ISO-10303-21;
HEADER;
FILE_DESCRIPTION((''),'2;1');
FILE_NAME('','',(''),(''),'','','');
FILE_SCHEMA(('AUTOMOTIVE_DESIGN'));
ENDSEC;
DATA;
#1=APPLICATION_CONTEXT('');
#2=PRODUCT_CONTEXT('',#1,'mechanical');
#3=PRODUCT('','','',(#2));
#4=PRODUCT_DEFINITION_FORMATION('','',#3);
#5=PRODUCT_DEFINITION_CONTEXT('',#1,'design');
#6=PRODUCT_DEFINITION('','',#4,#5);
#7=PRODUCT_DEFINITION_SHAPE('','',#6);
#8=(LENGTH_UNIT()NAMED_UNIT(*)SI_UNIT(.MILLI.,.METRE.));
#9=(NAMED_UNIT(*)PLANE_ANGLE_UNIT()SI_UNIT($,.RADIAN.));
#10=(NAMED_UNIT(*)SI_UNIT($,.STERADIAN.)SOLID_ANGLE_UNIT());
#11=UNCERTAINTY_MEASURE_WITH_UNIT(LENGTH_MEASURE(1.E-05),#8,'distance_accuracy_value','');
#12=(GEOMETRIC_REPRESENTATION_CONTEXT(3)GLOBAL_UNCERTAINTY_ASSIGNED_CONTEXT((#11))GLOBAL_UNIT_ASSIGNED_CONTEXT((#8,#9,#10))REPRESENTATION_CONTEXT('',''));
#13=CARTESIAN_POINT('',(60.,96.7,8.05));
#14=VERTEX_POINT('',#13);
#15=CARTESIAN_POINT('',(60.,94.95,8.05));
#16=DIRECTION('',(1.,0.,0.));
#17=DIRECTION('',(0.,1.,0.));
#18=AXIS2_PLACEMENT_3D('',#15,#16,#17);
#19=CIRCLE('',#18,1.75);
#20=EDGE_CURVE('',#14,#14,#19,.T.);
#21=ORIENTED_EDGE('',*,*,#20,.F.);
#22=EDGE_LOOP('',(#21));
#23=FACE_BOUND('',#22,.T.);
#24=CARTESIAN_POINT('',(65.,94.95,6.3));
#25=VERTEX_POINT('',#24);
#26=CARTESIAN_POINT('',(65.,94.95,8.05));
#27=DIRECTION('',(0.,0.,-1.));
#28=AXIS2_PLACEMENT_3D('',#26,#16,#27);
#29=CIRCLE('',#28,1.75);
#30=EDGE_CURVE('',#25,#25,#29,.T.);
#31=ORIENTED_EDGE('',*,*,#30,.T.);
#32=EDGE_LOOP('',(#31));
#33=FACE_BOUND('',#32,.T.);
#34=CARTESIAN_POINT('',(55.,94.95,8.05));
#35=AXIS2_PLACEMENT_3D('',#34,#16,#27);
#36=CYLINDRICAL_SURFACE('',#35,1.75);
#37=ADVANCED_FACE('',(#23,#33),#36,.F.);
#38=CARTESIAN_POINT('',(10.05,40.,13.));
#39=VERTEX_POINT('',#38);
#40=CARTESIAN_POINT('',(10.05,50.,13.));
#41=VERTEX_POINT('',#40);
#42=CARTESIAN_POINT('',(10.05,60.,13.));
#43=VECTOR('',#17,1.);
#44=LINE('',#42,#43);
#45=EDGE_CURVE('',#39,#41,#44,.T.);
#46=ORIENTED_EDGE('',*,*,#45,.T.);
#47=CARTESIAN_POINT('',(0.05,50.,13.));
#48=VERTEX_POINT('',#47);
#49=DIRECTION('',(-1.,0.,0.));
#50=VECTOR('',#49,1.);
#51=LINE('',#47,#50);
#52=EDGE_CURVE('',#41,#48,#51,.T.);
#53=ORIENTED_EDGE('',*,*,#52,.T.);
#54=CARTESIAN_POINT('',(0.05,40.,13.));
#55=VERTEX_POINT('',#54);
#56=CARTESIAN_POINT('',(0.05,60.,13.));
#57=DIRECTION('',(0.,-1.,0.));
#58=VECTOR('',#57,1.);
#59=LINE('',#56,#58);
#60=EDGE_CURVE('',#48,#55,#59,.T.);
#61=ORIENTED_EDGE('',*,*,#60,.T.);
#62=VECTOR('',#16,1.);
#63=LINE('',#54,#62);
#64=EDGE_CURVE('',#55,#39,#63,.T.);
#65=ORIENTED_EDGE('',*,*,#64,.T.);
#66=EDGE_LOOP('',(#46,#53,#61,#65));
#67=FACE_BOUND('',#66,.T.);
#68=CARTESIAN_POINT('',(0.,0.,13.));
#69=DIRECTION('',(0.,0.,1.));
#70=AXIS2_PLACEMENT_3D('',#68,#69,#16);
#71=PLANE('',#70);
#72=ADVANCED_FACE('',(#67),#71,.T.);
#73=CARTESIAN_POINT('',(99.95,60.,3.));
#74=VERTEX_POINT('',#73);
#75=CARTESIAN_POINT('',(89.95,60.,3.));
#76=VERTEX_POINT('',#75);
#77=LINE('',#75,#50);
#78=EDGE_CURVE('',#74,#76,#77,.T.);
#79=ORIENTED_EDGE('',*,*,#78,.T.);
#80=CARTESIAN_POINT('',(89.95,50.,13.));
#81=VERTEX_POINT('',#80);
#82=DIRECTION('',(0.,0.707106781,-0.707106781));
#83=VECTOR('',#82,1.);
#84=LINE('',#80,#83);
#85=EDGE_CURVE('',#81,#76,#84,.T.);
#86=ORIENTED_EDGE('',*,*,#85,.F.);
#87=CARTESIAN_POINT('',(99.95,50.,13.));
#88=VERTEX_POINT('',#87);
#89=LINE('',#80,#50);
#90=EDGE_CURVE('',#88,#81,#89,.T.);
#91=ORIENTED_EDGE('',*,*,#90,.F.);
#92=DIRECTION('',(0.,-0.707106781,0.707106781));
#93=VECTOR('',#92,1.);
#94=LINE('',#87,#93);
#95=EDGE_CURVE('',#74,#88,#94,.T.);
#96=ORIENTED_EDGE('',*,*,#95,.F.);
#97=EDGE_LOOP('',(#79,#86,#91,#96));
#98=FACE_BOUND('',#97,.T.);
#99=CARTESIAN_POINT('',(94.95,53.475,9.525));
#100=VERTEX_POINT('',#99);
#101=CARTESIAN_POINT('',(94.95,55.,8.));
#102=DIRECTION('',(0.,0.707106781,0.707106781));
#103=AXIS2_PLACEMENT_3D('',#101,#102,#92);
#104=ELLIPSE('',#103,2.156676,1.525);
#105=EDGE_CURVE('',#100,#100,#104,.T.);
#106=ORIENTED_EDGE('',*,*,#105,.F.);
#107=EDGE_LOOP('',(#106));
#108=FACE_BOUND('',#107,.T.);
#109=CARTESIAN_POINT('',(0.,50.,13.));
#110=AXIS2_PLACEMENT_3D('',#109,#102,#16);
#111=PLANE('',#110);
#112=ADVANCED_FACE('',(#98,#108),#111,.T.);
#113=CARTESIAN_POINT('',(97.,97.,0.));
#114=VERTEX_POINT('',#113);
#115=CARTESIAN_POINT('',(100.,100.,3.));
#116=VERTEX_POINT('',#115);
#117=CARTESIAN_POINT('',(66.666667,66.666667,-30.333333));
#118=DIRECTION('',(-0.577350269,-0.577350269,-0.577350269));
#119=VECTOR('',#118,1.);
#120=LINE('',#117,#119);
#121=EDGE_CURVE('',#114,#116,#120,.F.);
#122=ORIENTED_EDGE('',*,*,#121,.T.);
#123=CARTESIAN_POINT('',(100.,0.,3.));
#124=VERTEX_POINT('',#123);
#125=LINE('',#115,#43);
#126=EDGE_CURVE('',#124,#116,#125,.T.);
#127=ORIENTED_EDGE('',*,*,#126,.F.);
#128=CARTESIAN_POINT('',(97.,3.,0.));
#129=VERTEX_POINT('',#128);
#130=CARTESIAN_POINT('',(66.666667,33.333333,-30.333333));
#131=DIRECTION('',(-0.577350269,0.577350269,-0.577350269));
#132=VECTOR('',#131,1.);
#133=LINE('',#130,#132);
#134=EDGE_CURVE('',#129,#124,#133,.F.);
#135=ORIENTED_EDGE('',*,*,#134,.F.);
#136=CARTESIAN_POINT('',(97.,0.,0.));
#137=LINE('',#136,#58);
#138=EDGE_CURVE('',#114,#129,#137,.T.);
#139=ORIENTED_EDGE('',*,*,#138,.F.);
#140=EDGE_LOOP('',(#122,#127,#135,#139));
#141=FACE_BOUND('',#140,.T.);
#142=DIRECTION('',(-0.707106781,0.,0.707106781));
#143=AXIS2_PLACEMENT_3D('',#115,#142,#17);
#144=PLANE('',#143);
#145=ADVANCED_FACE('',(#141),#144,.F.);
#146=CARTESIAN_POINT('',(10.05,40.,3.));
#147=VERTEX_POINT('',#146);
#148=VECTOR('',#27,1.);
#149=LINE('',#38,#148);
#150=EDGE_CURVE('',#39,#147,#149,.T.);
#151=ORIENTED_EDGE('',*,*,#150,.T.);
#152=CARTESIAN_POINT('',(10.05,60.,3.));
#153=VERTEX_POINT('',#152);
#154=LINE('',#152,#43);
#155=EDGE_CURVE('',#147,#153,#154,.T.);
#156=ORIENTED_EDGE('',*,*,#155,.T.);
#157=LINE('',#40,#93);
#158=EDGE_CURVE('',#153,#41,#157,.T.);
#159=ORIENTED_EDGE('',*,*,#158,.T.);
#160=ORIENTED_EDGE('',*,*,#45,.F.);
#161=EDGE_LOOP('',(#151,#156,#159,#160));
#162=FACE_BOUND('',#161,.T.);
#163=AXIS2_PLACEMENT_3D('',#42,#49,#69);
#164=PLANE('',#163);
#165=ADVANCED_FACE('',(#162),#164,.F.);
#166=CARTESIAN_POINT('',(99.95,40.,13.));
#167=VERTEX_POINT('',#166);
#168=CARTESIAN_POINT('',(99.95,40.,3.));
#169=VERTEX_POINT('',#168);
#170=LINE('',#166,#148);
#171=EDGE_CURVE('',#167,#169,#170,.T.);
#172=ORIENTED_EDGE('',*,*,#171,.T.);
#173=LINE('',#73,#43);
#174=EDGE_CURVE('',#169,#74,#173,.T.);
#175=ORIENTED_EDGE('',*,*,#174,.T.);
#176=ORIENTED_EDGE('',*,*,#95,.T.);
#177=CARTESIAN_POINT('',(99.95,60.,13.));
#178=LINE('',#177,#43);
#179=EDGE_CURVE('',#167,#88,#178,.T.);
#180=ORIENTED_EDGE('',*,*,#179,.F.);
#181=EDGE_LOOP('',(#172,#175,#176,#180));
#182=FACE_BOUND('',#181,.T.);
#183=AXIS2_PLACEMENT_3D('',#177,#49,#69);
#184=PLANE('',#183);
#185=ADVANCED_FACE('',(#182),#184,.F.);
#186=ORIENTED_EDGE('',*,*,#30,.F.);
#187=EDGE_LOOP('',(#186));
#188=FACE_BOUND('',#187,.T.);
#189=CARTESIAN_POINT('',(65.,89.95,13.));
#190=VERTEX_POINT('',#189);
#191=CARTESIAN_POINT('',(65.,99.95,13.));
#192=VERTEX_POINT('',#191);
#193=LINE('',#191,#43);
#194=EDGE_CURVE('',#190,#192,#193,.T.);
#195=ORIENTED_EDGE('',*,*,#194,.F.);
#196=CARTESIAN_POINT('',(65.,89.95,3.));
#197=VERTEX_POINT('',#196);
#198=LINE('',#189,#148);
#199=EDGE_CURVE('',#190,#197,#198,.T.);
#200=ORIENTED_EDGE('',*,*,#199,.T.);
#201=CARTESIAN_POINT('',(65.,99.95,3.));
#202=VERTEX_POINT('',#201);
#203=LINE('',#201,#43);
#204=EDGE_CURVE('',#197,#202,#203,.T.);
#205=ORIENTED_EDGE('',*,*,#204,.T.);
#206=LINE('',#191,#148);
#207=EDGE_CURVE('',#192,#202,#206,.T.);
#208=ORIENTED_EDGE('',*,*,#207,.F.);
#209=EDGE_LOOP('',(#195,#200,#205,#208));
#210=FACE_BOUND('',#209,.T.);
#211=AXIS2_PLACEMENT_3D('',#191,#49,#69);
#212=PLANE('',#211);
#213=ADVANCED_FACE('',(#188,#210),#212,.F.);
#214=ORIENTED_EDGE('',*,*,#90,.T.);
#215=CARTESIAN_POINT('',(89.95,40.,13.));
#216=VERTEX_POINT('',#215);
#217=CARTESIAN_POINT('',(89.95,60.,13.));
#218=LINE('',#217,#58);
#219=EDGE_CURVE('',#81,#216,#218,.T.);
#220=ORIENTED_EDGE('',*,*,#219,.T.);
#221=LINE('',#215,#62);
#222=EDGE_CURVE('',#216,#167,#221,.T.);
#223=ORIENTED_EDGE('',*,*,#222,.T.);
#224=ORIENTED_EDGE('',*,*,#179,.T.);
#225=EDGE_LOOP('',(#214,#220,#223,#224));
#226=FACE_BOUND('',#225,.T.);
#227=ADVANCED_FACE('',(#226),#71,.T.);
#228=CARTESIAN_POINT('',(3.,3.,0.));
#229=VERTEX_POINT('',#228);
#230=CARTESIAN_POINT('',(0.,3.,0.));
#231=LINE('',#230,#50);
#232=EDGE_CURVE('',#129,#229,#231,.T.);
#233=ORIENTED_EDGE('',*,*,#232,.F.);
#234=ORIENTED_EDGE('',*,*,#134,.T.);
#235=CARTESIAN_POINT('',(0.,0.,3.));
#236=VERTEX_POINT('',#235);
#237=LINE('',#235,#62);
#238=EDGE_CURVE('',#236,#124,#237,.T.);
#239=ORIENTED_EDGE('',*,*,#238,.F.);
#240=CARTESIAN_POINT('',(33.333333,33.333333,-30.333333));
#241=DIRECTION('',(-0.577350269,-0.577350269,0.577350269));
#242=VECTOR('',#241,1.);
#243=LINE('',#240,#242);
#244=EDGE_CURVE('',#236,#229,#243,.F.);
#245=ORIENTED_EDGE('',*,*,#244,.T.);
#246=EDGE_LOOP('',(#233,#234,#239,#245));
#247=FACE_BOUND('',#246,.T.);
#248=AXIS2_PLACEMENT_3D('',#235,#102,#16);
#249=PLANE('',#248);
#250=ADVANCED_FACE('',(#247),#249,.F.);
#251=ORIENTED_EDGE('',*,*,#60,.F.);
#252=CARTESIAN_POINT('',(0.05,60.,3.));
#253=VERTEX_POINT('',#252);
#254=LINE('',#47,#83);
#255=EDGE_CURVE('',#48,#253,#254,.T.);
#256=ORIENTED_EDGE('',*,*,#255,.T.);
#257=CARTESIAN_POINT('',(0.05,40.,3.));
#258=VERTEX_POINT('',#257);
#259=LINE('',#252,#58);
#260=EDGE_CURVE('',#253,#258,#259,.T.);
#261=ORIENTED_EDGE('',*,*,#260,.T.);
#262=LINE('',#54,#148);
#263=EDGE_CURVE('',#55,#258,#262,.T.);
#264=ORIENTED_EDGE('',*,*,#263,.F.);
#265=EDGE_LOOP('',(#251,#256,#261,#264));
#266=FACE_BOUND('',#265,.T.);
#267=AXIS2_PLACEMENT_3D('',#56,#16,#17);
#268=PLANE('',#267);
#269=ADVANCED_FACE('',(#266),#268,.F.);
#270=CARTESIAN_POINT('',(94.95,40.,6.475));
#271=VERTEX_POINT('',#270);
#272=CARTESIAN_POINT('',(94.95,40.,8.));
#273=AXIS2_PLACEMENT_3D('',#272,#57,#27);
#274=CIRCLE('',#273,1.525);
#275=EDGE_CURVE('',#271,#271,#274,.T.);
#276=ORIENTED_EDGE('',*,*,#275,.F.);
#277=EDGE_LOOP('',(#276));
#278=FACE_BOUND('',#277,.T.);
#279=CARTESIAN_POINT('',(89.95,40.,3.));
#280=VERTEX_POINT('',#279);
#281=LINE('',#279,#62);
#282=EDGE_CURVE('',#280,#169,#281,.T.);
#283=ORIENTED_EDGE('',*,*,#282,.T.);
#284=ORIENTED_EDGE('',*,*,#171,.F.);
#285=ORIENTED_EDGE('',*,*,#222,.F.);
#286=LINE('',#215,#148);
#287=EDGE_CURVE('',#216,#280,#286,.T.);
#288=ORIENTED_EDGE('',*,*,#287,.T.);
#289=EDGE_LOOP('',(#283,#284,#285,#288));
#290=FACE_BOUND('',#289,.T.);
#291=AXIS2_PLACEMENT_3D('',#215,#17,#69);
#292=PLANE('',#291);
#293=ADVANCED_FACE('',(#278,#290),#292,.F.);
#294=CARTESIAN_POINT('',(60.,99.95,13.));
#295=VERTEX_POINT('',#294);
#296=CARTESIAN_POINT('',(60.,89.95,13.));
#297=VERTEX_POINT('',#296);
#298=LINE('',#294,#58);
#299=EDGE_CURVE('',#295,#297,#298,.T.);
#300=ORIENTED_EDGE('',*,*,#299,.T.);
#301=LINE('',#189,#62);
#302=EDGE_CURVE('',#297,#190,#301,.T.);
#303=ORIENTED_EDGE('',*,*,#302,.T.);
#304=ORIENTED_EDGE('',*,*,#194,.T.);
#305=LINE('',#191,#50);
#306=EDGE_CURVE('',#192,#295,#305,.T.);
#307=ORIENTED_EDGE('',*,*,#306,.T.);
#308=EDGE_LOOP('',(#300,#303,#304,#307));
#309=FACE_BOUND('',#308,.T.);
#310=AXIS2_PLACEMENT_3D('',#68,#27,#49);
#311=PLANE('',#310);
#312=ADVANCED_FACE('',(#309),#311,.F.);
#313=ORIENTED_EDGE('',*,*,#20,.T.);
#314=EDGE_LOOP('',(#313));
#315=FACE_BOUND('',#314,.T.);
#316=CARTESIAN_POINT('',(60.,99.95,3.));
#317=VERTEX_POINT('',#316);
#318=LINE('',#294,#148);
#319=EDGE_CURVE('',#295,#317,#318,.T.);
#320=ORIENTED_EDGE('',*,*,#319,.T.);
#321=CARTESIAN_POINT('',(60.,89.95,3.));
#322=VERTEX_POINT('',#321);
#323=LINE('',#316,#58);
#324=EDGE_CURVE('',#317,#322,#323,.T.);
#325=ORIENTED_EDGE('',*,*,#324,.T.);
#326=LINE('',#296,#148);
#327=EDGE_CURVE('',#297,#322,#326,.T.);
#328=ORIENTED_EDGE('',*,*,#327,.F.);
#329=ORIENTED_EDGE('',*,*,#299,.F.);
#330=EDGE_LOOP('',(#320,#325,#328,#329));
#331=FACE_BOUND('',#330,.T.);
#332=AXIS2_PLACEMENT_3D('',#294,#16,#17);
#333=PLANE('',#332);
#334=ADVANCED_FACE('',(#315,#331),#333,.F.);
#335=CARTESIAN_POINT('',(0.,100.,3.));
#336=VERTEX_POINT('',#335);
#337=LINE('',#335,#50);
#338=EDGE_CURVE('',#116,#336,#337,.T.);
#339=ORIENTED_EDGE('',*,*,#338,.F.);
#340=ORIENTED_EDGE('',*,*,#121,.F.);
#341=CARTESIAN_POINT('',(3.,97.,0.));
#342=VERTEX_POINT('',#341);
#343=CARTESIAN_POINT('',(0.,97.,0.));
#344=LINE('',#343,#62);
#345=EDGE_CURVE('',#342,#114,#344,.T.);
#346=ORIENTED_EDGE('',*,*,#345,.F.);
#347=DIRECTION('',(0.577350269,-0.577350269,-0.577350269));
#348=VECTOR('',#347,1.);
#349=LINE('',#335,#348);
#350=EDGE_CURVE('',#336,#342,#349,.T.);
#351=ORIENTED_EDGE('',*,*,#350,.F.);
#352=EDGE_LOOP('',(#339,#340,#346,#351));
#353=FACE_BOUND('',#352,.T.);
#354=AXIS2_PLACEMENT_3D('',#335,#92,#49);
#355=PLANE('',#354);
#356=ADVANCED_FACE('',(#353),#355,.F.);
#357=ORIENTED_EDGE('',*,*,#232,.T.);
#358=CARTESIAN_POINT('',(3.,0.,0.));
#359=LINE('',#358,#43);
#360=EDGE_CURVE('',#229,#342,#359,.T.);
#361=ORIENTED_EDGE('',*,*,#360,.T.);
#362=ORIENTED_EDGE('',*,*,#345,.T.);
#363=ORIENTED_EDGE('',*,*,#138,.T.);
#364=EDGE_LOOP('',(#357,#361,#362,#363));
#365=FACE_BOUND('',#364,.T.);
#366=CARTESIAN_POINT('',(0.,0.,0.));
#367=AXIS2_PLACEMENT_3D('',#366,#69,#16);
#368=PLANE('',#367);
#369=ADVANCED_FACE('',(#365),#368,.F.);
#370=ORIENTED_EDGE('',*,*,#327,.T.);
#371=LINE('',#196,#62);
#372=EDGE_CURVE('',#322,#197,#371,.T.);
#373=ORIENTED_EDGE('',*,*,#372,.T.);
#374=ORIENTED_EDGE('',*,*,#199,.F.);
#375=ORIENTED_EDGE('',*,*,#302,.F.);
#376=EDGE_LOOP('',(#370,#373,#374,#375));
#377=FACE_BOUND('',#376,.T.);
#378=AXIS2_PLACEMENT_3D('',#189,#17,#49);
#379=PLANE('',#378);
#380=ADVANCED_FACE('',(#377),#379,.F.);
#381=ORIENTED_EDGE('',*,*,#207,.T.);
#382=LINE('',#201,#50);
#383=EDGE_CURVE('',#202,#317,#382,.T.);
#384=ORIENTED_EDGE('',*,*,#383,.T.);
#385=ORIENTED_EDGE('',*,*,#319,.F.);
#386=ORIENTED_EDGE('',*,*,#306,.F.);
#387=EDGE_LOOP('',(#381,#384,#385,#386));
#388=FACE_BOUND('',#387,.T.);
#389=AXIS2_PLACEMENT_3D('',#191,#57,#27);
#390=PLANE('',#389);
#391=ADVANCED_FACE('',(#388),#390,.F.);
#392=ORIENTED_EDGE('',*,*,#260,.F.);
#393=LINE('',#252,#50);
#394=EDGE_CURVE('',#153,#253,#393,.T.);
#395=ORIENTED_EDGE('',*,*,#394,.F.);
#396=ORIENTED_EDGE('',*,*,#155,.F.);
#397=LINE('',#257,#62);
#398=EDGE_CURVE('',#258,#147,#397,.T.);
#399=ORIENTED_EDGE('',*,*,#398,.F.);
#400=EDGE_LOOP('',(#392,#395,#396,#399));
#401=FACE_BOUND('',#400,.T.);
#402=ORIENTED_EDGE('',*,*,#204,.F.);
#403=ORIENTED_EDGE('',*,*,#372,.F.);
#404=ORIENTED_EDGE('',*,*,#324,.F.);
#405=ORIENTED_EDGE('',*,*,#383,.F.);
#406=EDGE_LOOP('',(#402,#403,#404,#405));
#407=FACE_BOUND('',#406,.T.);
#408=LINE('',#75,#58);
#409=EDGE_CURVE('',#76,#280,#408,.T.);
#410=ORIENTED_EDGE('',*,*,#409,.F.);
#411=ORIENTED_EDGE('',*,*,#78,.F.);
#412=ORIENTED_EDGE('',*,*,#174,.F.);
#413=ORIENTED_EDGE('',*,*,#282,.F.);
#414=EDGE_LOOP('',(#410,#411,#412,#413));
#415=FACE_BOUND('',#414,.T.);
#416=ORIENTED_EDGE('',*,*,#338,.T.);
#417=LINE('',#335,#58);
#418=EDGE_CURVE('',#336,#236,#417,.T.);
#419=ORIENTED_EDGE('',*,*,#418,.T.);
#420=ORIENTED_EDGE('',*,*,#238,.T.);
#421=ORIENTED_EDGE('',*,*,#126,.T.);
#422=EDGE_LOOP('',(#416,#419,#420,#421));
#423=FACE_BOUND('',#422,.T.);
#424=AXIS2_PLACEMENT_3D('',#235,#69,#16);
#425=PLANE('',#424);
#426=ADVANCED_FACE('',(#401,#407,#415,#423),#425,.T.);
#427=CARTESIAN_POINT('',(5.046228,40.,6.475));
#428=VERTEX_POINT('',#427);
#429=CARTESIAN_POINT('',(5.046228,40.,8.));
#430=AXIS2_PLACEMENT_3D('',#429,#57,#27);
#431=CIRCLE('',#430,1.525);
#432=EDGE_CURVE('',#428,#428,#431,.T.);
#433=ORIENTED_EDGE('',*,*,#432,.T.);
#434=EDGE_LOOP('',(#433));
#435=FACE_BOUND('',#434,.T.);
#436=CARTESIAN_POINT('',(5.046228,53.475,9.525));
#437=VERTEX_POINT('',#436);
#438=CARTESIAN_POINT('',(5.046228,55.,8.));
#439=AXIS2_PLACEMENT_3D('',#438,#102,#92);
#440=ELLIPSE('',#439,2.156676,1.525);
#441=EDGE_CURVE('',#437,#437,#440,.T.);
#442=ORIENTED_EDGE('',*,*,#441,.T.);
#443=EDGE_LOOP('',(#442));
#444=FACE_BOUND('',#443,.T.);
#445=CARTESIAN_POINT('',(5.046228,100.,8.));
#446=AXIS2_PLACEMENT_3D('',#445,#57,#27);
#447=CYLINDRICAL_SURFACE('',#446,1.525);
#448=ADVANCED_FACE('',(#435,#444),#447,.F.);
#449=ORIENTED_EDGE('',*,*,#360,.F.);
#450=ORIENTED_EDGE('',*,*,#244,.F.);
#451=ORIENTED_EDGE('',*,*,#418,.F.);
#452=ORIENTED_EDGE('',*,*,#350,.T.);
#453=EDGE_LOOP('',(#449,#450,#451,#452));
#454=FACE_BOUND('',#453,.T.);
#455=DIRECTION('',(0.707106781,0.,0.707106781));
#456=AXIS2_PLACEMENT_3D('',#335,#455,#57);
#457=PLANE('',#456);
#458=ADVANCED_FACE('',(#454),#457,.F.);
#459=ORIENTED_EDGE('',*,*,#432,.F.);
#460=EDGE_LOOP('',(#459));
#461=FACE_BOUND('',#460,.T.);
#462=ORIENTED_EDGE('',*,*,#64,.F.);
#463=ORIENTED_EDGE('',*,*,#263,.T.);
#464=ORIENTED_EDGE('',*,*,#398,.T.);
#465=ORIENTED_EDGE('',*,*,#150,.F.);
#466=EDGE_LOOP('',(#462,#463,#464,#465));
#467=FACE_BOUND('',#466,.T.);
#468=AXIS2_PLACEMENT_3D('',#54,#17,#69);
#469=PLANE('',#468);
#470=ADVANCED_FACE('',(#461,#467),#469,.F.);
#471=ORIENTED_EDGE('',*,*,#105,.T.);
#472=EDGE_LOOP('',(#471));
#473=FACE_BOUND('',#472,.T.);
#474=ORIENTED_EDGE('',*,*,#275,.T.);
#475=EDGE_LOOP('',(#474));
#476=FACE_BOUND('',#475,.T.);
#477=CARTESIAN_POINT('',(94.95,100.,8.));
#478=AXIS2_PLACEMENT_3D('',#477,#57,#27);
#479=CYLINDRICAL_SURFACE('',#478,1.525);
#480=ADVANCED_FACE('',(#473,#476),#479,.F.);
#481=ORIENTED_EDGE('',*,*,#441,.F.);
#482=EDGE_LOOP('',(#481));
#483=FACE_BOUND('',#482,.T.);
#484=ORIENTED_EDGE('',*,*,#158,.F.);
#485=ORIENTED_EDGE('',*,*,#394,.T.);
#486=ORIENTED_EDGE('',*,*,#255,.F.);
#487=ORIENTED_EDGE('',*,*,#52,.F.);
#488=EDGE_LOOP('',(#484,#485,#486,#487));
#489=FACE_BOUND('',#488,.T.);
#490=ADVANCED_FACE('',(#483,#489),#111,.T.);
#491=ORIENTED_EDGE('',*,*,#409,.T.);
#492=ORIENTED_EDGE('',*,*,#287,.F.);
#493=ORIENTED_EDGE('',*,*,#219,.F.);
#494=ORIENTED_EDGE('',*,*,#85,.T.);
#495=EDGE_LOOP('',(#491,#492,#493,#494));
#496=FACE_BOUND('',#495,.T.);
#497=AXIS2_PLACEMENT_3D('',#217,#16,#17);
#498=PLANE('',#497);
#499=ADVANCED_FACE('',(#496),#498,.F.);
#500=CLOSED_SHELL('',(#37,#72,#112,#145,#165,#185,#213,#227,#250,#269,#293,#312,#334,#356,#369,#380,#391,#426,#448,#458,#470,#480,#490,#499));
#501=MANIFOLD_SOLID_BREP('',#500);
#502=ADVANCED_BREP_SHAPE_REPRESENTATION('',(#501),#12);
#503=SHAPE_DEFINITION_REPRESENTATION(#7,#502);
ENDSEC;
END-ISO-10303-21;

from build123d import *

# Parameters (mm, degrees)
ESQUISSE1_W             = 100
ESQUISSE1_H             = 100
BOSS_EXTRU_1_DEPTH      = 3
ESQUISSE2_W             = 10
ESQUISSE2_H             = 20
BOSS_EXTRU_2_DEPTH      = 10
CHANFREIN1_SIZE         = 10
ESQUISSE3_R             = 1.525
ENL_V_MAT_EXTRU_1_DEPTH = 118.3413823
CHANFREIN2_SIZE         = 3
ESQUISSE4_W             = 5
ESQUISSE4_H             = 10
BOSS_EXTRU_3_DEPTH      = 10
ESQUISSE5_R             = 1.75
ENL_V_MAT_EXTRU_2_DEPTH = 10


with BuildPart() as part:
    # Esquisse1 → Boss.-Extru.1 (new body)
    with BuildSketch(Plane.XY):
        with Locations((50, 50)):
            Rectangle(ESQUISSE1_W, ESQUISSE1_H)
    extrude(amount=BOSS_EXTRU_1_DEPTH)

    # Esquisse2 → Boss.-Extru.2 (add)
    with BuildSketch(Plane.XY.offset(3)):
        with Locations((5.05, 50)):
            Rectangle(ESQUISSE2_W, ESQUISSE2_H)
        with Locations((94.95, 50)):
            Rectangle(ESQUISSE2_W, ESQUISSE2_H)
    extrude(amount=BOSS_EXTRU_2_DEPTH)

    # Chanfrein1
    chanfrein1_edges = [part.edges().sort_by_distance(p)[0] for p in [
        (94.95, 60, 13),
        (5.05, 60, 13),
    ]]
    chamfer(chanfrein1_edges, length=CHANFREIN1_SIZE - 0.0001)  # a hair under: the kernel refuses the full size

    # Esquisse3 → Enlèv. mat.-Extru.1 (cut, through all)
    with BuildSketch(Plane.XZ.offset(-40)):
        with Locations(Location((5.046227865, 8, 0), (0, 0, 270))):
            Circle(ESQUISSE3_R)
        with Locations(Location((94.95, 8, 0), (0, 0, 270))):
            Circle(ESQUISSE3_R)
    extrude(amount=-ENL_V_MAT_EXTRU_1_DEPTH, mode=Mode.SUBTRACT)

    # Chanfrein2
    chanfrein2_edges = [part.edges().sort_by_distance(p)[0] for p in [
        (50, 0, 0),
        (100, 50, 0),
        (50, 100, 0),
        (0, 50, 0),
    ]]
    chamfer(chanfrein2_edges, length=CHANFREIN2_SIZE - 0.0001)  # a hair under: the kernel refuses the full size

    # Esquisse4 → Boss.-Extru.3 (add)
    with BuildSketch(Plane.XY.offset(3)):
        with Locations((62.5, 94.95)):
            Rectangle(ESQUISSE4_W, ESQUISSE4_H)
    extrude(amount=BOSS_EXTRU_3_DEPTH)

    # Esquisse5 → Enlèv. mat.-Extru.2 (cut)
    with BuildSketch(Plane(origin=(65, 0, 0), x_dir=(0, 0, -1), z_dir=(1, 0, 0))):
        with Locations((-8.05, 94.95)):
            Circle(ESQUISSE5_R)
    extrude(amount=-ENL_V_MAT_EXTRU_2_DEPTH, mode=Mode.SUBTRACT)


solid = part.part
